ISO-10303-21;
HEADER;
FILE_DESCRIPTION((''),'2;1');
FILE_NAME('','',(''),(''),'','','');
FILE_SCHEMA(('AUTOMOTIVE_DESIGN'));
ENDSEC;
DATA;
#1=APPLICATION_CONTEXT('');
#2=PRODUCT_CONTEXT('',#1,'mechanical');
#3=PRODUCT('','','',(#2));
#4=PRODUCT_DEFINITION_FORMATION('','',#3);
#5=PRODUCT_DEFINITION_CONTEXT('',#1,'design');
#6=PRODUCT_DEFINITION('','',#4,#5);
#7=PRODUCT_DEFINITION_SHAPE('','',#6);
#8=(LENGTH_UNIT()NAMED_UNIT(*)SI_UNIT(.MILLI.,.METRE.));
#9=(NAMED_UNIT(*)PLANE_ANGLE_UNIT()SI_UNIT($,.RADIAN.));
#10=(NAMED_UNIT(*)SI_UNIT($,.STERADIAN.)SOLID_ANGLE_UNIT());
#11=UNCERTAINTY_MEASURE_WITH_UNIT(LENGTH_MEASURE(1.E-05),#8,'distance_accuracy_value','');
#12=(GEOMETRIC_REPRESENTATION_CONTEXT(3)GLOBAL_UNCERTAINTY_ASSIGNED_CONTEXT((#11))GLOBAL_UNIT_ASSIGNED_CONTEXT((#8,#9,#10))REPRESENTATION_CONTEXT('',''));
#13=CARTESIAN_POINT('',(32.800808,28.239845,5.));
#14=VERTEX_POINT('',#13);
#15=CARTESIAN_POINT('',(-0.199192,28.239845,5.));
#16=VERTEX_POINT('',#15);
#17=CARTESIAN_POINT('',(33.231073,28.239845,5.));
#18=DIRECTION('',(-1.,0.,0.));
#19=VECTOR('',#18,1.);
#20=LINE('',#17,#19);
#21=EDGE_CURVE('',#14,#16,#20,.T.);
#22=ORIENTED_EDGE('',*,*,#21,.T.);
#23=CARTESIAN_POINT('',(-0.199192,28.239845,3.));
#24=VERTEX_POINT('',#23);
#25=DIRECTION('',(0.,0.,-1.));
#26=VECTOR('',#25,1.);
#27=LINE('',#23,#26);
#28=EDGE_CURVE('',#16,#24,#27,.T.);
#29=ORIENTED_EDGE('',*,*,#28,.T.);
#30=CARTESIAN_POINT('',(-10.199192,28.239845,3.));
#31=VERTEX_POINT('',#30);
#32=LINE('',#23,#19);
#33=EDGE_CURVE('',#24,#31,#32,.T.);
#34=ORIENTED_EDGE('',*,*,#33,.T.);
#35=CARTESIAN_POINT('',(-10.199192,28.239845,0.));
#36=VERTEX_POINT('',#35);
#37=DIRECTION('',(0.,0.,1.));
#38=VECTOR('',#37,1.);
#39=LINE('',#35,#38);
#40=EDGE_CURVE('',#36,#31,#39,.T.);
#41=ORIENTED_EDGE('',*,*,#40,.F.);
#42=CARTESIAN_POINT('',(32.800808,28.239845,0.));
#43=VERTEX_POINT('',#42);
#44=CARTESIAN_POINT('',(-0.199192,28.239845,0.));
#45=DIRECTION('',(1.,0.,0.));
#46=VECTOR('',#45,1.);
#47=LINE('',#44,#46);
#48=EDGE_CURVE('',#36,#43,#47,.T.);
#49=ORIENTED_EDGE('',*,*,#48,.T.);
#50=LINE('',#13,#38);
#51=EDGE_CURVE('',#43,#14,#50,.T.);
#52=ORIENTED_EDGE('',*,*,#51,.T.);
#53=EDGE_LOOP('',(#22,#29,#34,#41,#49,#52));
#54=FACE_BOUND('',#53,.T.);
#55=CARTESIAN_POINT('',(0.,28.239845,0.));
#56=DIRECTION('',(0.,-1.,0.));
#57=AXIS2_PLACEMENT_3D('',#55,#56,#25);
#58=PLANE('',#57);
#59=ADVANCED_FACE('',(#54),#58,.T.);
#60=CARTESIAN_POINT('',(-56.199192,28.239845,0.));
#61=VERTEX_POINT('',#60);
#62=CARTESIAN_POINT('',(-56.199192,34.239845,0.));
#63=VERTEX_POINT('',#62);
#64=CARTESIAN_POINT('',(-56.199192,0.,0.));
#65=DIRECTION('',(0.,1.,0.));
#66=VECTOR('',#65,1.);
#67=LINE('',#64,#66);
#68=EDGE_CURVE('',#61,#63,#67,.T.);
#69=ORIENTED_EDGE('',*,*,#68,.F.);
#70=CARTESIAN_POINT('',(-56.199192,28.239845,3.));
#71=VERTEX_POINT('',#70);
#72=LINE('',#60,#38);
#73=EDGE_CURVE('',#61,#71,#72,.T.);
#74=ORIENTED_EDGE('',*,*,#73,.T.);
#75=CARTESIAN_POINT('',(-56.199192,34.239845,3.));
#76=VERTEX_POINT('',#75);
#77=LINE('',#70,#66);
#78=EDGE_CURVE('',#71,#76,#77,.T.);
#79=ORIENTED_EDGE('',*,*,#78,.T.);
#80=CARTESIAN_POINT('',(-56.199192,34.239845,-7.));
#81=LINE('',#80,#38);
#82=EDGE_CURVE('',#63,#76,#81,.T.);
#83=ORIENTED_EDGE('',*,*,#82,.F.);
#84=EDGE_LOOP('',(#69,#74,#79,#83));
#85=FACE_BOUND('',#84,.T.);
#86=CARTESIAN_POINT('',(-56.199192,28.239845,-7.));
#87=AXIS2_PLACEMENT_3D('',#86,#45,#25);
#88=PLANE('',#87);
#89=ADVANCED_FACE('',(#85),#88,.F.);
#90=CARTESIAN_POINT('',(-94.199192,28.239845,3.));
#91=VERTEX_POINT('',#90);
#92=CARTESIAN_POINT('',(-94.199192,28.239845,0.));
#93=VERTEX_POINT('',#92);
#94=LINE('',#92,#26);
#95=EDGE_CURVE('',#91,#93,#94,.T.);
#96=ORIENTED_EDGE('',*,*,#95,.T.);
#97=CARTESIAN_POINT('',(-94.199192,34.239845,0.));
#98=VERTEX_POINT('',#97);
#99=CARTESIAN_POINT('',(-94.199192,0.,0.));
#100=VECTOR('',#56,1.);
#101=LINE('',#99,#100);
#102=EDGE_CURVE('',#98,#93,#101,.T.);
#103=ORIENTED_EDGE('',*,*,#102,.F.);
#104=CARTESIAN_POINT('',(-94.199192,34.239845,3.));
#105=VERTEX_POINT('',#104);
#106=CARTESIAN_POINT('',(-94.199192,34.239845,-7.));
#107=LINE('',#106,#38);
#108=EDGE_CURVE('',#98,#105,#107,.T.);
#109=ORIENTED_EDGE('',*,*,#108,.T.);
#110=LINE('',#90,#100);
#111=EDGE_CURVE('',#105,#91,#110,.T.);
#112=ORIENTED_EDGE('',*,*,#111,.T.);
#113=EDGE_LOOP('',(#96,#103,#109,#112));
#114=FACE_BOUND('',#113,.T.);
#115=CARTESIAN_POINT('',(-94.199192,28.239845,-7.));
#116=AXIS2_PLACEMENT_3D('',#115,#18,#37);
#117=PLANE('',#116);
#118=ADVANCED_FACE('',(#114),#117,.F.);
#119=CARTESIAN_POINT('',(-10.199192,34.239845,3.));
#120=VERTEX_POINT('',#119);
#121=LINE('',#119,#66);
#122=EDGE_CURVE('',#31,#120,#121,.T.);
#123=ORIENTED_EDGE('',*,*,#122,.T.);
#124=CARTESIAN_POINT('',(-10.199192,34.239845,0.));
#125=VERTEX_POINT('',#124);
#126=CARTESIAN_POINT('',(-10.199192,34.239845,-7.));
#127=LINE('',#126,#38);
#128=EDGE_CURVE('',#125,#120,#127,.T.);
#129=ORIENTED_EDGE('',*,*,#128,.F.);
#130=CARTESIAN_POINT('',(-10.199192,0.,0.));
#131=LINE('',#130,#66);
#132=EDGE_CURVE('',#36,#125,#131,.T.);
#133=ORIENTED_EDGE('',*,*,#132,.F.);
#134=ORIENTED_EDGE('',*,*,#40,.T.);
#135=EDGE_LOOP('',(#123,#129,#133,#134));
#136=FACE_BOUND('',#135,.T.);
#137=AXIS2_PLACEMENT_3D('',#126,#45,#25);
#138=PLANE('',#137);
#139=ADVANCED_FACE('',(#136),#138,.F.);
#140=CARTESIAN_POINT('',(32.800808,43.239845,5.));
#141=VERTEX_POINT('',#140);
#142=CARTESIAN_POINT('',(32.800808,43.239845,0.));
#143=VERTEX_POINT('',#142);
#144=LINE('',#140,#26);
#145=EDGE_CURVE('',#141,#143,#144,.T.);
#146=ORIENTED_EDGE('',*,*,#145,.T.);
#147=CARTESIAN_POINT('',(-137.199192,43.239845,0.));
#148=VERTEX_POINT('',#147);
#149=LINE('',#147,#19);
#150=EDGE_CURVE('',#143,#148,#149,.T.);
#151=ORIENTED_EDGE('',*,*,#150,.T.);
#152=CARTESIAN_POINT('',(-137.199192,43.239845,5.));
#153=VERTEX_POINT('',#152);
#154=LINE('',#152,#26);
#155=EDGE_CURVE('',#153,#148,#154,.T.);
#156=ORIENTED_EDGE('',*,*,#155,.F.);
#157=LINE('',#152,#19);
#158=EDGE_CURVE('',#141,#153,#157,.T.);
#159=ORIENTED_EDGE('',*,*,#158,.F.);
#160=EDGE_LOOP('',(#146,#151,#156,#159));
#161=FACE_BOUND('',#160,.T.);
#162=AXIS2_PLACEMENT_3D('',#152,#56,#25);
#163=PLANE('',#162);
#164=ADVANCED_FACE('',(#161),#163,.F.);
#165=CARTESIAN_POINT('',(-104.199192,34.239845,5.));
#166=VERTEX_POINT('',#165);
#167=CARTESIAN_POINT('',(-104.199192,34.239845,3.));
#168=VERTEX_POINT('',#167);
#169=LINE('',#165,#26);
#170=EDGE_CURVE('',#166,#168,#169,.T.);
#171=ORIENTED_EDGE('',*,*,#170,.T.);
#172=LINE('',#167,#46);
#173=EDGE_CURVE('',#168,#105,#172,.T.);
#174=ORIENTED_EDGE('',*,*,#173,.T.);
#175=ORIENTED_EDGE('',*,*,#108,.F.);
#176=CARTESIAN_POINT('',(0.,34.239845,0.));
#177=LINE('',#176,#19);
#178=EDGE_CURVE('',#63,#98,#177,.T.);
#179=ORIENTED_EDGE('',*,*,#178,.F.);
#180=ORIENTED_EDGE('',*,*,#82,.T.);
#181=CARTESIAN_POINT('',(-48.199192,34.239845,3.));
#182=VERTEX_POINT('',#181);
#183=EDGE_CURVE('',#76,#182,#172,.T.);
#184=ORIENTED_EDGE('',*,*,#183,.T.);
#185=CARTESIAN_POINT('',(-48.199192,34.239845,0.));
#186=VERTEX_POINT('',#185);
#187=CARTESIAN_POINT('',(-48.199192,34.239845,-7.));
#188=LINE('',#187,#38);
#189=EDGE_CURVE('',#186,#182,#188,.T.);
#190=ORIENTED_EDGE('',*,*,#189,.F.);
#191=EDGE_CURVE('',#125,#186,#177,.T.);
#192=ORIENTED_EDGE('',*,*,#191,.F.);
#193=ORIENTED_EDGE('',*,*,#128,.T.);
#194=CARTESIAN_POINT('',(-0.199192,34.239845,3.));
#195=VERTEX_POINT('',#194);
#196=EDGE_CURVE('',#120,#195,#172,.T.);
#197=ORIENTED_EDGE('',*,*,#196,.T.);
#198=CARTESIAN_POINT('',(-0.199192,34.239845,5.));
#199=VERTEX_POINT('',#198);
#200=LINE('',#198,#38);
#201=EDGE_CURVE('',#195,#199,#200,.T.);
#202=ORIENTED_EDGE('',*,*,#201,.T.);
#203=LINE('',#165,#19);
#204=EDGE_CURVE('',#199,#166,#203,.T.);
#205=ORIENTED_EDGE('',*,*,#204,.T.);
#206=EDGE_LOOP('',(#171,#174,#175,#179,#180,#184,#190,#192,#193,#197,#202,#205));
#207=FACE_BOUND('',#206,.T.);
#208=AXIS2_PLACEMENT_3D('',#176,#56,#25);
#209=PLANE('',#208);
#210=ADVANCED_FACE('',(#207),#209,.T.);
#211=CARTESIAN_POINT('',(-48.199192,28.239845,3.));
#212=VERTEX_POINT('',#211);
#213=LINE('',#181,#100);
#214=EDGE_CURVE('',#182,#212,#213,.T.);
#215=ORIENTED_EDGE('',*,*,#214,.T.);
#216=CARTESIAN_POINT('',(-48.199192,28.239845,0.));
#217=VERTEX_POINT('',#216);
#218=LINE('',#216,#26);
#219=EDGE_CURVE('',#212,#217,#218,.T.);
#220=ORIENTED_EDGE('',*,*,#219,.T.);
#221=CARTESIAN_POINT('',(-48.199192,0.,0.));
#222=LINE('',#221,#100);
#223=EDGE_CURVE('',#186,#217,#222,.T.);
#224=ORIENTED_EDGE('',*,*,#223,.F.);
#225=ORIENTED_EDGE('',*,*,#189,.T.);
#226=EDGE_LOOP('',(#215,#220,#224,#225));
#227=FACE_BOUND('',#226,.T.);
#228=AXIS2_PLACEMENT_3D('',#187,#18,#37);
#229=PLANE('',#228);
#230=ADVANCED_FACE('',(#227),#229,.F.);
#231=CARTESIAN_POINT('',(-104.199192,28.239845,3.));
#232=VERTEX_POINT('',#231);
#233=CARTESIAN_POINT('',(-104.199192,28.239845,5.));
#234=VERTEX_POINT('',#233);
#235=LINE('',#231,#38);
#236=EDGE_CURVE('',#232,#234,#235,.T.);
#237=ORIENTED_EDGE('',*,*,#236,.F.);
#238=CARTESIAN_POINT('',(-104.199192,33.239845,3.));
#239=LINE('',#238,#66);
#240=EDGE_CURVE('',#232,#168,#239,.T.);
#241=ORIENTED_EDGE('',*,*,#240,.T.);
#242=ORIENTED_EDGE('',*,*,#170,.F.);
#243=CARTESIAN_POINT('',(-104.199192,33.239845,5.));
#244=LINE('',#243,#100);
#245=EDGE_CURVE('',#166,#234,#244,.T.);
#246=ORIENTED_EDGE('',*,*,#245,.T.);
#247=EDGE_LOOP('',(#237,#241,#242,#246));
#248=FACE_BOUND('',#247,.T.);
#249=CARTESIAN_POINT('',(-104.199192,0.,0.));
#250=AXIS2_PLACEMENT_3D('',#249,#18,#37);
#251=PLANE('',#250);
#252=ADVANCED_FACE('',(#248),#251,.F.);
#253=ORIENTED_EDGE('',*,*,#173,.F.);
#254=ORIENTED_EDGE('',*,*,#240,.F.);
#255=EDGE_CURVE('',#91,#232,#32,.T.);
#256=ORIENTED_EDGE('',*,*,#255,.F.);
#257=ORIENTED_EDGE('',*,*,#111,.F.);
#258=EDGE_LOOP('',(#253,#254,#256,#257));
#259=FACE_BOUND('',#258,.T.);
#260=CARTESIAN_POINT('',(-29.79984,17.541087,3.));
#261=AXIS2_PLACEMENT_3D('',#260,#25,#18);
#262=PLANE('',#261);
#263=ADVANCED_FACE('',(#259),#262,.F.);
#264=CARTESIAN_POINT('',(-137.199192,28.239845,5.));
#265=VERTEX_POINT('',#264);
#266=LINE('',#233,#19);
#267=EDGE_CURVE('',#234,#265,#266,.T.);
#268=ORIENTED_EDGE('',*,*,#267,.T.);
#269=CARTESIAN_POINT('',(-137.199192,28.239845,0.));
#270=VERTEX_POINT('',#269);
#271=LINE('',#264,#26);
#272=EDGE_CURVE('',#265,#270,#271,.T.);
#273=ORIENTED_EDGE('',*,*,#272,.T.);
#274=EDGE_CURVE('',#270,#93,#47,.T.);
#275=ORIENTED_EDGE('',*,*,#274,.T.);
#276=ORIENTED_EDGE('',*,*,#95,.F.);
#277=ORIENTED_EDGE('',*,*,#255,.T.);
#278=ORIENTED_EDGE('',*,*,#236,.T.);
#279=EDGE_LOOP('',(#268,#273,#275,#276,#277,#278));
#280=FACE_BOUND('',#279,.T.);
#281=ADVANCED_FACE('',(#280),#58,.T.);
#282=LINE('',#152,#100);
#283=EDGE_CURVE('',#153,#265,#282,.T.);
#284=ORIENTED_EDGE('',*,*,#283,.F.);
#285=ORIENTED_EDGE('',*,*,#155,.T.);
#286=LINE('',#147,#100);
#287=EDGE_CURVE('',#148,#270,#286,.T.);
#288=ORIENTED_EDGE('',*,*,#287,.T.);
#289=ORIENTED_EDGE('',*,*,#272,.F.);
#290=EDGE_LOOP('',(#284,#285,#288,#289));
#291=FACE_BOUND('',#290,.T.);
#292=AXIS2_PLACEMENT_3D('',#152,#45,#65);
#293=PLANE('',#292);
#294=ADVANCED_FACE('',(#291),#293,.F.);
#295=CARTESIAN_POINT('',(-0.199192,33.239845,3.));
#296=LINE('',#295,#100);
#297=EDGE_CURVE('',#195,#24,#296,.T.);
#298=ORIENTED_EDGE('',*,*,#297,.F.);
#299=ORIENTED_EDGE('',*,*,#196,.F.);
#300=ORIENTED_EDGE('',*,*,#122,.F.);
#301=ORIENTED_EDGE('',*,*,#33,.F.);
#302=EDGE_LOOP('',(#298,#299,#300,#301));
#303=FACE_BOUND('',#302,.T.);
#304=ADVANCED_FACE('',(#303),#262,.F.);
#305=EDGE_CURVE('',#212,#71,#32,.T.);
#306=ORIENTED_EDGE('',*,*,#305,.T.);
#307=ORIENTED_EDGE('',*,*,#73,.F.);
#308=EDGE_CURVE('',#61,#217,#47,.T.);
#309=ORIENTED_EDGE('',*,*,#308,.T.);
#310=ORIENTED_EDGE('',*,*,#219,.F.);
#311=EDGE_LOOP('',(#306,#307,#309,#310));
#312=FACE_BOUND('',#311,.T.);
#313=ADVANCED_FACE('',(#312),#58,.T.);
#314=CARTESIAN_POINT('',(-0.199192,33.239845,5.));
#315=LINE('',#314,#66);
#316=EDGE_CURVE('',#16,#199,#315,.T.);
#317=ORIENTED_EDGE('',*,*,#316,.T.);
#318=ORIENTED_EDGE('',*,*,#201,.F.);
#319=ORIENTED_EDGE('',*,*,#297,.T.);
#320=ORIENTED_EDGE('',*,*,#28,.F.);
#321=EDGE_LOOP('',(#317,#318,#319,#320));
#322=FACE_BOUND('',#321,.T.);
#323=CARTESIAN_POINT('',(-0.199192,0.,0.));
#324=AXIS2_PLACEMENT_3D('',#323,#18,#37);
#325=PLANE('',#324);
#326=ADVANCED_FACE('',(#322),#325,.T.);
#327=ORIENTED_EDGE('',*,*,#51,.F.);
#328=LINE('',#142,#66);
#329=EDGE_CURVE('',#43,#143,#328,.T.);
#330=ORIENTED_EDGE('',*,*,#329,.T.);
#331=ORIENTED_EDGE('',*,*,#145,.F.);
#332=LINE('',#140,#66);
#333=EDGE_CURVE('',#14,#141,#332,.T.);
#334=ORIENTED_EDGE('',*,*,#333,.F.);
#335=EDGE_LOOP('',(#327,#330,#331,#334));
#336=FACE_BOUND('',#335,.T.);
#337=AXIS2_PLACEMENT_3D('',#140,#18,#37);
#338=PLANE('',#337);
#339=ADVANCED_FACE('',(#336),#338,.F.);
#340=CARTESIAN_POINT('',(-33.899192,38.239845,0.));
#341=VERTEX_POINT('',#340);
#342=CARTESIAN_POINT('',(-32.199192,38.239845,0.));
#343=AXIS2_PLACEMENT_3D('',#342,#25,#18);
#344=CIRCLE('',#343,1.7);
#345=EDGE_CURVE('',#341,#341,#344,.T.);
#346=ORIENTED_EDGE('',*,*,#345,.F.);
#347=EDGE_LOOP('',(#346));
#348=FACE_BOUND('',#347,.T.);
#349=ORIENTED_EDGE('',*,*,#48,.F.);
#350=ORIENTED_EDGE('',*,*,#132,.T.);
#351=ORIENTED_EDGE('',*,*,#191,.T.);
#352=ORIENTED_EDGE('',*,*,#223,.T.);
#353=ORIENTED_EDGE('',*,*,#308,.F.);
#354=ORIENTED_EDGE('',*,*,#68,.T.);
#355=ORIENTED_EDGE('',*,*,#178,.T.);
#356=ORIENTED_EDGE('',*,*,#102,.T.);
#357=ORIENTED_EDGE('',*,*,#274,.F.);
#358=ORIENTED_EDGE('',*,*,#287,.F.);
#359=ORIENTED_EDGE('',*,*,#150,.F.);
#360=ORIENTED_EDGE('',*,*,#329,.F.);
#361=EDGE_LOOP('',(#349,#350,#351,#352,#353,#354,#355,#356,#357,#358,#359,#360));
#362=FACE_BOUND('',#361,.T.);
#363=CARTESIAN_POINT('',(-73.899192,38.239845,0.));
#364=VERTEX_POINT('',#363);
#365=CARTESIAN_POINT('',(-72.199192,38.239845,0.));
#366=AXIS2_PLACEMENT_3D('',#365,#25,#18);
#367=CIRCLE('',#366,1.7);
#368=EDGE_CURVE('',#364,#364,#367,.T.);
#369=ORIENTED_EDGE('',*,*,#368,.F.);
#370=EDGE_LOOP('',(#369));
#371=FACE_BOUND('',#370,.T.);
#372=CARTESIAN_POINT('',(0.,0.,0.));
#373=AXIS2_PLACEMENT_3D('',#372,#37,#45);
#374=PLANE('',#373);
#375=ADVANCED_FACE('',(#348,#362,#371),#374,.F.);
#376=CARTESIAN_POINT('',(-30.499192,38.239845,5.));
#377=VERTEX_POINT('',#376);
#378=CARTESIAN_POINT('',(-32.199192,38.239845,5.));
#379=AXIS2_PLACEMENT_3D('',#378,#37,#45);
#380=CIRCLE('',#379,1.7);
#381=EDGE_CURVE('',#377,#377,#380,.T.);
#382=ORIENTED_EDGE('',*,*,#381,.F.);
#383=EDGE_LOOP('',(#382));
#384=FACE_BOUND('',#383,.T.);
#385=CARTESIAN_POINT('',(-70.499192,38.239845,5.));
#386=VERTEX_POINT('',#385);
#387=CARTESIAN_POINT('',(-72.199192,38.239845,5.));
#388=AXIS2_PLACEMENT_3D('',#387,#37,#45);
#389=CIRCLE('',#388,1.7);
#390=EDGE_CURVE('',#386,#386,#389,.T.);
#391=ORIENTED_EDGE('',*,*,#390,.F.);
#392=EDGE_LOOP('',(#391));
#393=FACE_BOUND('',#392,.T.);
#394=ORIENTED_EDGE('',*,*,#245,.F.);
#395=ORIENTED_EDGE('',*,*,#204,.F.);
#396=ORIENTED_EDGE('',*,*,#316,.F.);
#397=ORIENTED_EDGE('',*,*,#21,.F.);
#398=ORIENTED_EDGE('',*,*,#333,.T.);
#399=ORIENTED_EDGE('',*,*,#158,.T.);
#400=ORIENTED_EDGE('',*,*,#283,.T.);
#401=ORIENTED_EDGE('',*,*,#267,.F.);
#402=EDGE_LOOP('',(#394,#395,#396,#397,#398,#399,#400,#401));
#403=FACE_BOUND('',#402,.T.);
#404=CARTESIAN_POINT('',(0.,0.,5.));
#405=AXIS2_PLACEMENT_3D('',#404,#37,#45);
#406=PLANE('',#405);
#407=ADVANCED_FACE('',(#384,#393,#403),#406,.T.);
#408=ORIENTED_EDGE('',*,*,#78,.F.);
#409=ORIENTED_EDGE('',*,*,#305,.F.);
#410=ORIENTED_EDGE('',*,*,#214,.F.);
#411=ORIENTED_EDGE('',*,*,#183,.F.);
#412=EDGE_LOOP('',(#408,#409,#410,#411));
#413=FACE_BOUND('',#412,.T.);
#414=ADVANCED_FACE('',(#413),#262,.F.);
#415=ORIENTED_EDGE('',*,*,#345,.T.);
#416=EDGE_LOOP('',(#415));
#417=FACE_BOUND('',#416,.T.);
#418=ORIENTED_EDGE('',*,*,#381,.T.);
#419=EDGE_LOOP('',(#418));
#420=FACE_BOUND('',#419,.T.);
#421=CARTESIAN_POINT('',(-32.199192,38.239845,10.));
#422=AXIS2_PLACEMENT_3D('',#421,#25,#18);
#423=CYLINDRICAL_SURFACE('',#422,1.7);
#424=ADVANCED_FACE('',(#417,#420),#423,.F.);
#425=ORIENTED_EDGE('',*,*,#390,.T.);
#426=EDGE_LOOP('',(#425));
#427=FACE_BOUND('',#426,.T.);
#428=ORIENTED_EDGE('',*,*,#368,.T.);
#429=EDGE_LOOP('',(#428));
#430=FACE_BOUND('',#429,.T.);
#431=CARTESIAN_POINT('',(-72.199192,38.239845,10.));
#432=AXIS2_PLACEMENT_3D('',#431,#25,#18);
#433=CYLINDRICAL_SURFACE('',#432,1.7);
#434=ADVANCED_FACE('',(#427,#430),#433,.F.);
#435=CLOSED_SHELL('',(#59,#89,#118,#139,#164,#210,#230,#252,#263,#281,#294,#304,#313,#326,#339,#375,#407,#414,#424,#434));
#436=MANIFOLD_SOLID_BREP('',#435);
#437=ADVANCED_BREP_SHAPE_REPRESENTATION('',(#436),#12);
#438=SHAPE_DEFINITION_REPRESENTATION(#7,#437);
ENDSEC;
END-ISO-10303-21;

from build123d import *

# Parameters (mm, degrees)
SZKIC1_W                    = 170
SZKIC1_H                    = 20
DODANIE_WYCI_GNI_CIE1_DEPTH = 5
GNIAZDO1_START              = 3
GNIAZDO1_OUTLINE_W          = 100
GNIAZDO1_OUTLINE_H          = 10
GNIAZDO1_DEPTH              = 1
GNIAZDO1_START_2            = 4
GNIAZDO1_2_OUTLINE_W        = 100
GNIAZDO1_2_OUTLINE_H        = 1
GNIAZDO1_2_DEPTH            = 1
SZKIC2_W                    = 100
SZKIC2_H                    = 10
WYTNIJ_WYCI_GNI_CIE1_DEPTH  = 10
SZKIC3_W                    = 2
SZKIC3_H                    = 10
WYTNIJ_WYCI_GNI_CIE2_DEPTH  = 2
SZKIC4_W                    = 2
SZKIC4_H                    = 10
WYTNIJ_WYCI_GNI_CIE3_DEPTH  = 2
SZKIC5_W                    = 104
SZKIC5_H                    = 2
WYTNIJ_WYCI_GNI_CIE4_DEPTH  = 1
SZKIC6_R                    = 1.7
WYTNIJ_WYCI_GNI_CIE5_DEPTH  = 10
WYTNIJ_WYCI_GNI_CIE6_DEPTH  = 5
SZKIC8_W                    = 38
SZKIC8_H                    = 6
WYTNIJ_WYCI_GNI_CIE7_DEPTH  = 10


# Read off the part's stored shape, not the designer's step: Gniazdo1
with BuildPart() as part:
    # Szkic1 → Dodanie-wyciągnięcie1 (new body)
    with BuildSketch(Plane.XY):
        with Locations((-52.199192033, 33.239845261)):
            Rectangle(SZKIC1_W, SZKIC1_H)
    extrude(amount=DODANIE_WYCI_GNI_CIE1_DEPTH)

    # Gniazdo1 outline → Gniazdo1 (cut)
    with BuildSketch(Plane.XY.offset(GNIAZDO1_START)):
        with Locations((-52.199192033, 28.239845261)):
            Rectangle(GNIAZDO1_OUTLINE_W, GNIAZDO1_OUTLINE_H)
    extrude(amount=GNIAZDO1_DEPTH, mode=Mode.SUBTRACT)

    # Gniazdo1 2 outline → Gniazdo1 2 (cut)
    with BuildSketch(Plane.XY.offset(GNIAZDO1_START_2)):
        with Locations((-52.199192033, 32.739845261)):
            Rectangle(GNIAZDO1_2_OUTLINE_W, GNIAZDO1_2_OUTLINE_H)
    extrude(amount=GNIAZDO1_2_DEPTH, mode=Mode.SUBTRACT)

    # Szkic2 → Wytnij-wyciągnięcie1 (cut)
    with BuildSketch(Plane.XY.offset(3)):
        with Locations((-52.199192033, 28.239845261)):
            Rectangle(SZKIC2_W, SZKIC2_H)
    extrude(amount=WYTNIJ_WYCI_GNI_CIE1_DEPTH, mode=Mode.SUBTRACT)

    # Szkic3 → Wytnij-wyciągnięcie2 (cut)
    with BuildSketch(Plane(origin=(-102.199192033, 0, 0), x_dir=(0, 0, -1), z_dir=(1, 0, 0))):
        with Locations((-4, 28.239845261)):
            Rectangle(SZKIC3_W, SZKIC3_H)
    extrude(amount=-WYTNIJ_WYCI_GNI_CIE2_DEPTH, mode=Mode.SUBTRACT)

    # Szkic4 → Wytnij-wyciągnięcie3 (cut)
    with BuildSketch(Plane.ZY.offset(2.199192033)):
        with Locations((4, 28.239845261)):
            Rectangle(SZKIC4_W, SZKIC4_H)
    extrude(amount=-WYTNIJ_WYCI_GNI_CIE3_DEPTH, mode=Mode.SUBTRACT)

    # Szkic5 → Wytnij-wyciągnięcie4 (cut)
    with BuildSketch(Plane.XZ.offset(-33.239845261)):
        with Locations((-52.199192033, 4)):
            Rectangle(SZKIC5_W, SZKIC5_H)
    extrude(amount=-WYTNIJ_WYCI_GNI_CIE4_DEPTH, mode=Mode.SUBTRACT)

    # Szkic6 → Wytnij-wyciągnięcie5 (cut)
    with BuildSketch(Plane(origin=(0, 0, 0), x_dir=(-1, 0, 0), z_dir=(0, 0, -1))):
        with Locations((72.199192033, 38.239845261)):
            Circle(SZKIC6_R)
        with Locations((32.199192033, 38.239845261)):
            Circle(SZKIC6_R)
    extrude(amount=-WYTNIJ_WYCI_GNI_CIE5_DEPTH, mode=Mode.SUBTRACT)

    # Szkic7 → Wytnij-wyciągnięcie6 (cut)
    with BuildSketch(Plane.XZ.offset(-23.239845261)):
        Polygon((-0.199192033, 3), (-104.199192033, 3), (-104.199192033, 5), (-137.199192033, 5), (-137.199192033, 3), (-137.653937347, 3), (-137.653937347, 0), (-0.199192033, 0), (33.231073198, 0), (33.231073198, 3), (33.231073198, 5), (-0.199192033, 5), align=None)
    extrude(amount=-WYTNIJ_WYCI_GNI_CIE6_DEPTH, mode=Mode.SUBTRACT)

    # Szkic8 → Wytnij-wyciągnięcie7 (cut)
    with BuildSketch(Plane.XY.offset(3)):
        with Locations((-75.199192033, 31.239845261)):
            Rectangle(SZKIC8_W, SZKIC8_H)
        with Locations((-29.199192033, 31.239845261)):
            Rectangle(SZKIC8_W, SZKIC8_H)
    extrude(amount=-WYTNIJ_WYCI_GNI_CIE7_DEPTH, mode=Mode.SUBTRACT)


solid = part.part
